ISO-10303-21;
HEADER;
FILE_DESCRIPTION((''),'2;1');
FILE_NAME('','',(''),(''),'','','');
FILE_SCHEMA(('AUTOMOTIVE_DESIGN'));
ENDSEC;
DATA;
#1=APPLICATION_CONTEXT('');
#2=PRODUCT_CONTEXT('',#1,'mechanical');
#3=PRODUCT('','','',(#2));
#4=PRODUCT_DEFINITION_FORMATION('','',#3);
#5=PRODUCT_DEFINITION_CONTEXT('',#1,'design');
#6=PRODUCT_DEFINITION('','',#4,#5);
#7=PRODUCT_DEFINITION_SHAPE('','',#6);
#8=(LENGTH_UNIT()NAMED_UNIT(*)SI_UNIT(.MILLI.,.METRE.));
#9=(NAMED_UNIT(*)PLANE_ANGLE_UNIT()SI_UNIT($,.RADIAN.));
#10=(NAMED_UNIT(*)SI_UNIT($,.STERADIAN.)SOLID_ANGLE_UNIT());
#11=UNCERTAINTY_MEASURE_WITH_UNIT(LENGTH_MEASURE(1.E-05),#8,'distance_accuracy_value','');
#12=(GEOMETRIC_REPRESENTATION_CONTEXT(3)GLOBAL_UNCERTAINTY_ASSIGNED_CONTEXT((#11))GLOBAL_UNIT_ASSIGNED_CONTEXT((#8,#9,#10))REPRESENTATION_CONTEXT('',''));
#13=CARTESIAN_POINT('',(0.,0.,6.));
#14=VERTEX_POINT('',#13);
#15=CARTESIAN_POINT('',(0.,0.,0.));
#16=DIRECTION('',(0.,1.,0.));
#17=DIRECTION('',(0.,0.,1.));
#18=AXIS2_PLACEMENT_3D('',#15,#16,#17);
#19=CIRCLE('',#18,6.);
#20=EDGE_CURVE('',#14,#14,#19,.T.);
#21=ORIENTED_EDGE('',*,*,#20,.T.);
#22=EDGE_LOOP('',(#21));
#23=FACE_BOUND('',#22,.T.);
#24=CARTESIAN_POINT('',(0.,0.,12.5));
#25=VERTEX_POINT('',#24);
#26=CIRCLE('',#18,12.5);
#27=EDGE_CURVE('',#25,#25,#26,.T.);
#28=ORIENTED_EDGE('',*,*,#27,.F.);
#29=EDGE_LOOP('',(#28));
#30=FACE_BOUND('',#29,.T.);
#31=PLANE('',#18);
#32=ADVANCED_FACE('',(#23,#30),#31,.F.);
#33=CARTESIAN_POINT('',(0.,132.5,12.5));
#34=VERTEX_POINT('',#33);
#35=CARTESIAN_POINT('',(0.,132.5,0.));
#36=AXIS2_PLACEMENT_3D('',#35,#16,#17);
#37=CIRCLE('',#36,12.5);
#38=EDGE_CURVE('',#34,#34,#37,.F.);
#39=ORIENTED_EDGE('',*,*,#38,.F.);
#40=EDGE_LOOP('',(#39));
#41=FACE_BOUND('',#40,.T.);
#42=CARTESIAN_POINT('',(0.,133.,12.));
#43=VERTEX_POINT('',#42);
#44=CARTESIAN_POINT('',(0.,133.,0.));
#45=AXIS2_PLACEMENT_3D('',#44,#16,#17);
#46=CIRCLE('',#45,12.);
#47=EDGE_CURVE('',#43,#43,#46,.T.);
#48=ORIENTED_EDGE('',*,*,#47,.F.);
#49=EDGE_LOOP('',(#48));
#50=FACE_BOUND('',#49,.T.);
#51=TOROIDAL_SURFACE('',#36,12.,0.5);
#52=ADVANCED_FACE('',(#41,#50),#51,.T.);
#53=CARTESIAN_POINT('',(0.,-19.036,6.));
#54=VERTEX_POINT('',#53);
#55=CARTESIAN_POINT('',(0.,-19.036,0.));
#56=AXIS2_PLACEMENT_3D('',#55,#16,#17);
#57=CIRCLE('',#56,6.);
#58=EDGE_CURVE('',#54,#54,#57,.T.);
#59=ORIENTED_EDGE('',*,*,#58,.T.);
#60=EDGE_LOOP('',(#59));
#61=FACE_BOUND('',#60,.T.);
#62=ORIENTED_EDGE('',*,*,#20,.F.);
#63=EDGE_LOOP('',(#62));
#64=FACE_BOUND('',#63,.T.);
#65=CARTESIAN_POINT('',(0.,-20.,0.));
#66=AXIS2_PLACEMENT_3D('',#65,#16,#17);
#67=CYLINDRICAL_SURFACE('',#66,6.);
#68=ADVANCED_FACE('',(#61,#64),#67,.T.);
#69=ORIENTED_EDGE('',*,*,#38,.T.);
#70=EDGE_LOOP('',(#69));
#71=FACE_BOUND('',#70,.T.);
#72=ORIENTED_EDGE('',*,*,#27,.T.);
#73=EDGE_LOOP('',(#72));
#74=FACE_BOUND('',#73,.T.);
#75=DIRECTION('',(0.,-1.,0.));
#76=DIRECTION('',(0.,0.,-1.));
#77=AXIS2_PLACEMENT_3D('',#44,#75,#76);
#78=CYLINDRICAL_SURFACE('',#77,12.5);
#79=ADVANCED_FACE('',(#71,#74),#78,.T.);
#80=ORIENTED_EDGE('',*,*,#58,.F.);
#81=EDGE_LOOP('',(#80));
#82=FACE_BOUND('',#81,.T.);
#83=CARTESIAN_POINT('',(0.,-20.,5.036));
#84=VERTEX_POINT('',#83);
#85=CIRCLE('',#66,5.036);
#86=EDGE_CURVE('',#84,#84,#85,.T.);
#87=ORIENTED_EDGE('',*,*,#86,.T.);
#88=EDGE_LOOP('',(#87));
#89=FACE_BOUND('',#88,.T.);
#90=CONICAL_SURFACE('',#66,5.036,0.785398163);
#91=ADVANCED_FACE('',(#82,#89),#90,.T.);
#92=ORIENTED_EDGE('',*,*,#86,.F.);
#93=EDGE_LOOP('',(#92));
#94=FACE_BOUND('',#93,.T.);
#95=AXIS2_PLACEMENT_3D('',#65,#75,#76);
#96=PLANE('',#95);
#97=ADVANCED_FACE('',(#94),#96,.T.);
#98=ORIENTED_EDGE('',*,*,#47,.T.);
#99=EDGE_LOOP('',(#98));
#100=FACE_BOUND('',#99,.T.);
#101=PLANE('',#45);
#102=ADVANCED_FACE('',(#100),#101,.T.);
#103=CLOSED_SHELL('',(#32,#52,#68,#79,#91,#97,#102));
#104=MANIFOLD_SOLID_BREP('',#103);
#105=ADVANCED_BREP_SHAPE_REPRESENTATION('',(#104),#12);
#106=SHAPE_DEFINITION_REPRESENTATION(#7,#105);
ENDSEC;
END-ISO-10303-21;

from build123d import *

# Parameters (mm, degrees)
SKETCH1_R           = 12.5
BOSS_EXTRUDE1_DEPTH = 133
SKETCH2_R           = 10
BOSS_EXTRUDE2_DEPTH = 20
FILLET1_R           = 0.5


# Read off the part's stored shape, not the designer's step: M12 Machine Threads Stud1
with BuildPart() as part:
    # Sketch1 → Boss-Extrude1 (new body)
    with BuildSketch(Plane(origin=(0, 0, 0), x_dir=(1, 0, 0), z_dir=(0, 1, 0))):
        with Locations(Location((0, 0, 0), (0, 0, 270))):
            Circle(SKETCH1_R)
    extrude(amount=BOSS_EXTRUDE1_DEPTH)

    # Sketch2 → Boss-Extrude2 (add)
    with BuildSketch(Plane.XZ):
        with Locations(Location((0, 0, 0), (0, 0, 270))):
            Circle(SKETCH2_R)
    extrude(amount=BOSS_EXTRUDE2_DEPTH)

    # M12 Machine Threads Stud1 outline → M12 Machine Threads Stud1 (revolve, cut)
    with BuildSketch(Plane.XY):
        Polygon((10, 0), (6, 0), (6, -19.036), (5.036, -20), (10, -20), align=None)
    revolve(axis=Axis((0, 0, 0), (0, 1, 0)), mode=Mode.SUBTRACT)

    # Fillet1
    fillet1_edges = [part.edges().sort_by_distance(p)[0] for p in [
        (0, 133, -12.5),
    ]]
    fillet(fillet1_edges, radius=FILLET1_R)


solid = part.part
